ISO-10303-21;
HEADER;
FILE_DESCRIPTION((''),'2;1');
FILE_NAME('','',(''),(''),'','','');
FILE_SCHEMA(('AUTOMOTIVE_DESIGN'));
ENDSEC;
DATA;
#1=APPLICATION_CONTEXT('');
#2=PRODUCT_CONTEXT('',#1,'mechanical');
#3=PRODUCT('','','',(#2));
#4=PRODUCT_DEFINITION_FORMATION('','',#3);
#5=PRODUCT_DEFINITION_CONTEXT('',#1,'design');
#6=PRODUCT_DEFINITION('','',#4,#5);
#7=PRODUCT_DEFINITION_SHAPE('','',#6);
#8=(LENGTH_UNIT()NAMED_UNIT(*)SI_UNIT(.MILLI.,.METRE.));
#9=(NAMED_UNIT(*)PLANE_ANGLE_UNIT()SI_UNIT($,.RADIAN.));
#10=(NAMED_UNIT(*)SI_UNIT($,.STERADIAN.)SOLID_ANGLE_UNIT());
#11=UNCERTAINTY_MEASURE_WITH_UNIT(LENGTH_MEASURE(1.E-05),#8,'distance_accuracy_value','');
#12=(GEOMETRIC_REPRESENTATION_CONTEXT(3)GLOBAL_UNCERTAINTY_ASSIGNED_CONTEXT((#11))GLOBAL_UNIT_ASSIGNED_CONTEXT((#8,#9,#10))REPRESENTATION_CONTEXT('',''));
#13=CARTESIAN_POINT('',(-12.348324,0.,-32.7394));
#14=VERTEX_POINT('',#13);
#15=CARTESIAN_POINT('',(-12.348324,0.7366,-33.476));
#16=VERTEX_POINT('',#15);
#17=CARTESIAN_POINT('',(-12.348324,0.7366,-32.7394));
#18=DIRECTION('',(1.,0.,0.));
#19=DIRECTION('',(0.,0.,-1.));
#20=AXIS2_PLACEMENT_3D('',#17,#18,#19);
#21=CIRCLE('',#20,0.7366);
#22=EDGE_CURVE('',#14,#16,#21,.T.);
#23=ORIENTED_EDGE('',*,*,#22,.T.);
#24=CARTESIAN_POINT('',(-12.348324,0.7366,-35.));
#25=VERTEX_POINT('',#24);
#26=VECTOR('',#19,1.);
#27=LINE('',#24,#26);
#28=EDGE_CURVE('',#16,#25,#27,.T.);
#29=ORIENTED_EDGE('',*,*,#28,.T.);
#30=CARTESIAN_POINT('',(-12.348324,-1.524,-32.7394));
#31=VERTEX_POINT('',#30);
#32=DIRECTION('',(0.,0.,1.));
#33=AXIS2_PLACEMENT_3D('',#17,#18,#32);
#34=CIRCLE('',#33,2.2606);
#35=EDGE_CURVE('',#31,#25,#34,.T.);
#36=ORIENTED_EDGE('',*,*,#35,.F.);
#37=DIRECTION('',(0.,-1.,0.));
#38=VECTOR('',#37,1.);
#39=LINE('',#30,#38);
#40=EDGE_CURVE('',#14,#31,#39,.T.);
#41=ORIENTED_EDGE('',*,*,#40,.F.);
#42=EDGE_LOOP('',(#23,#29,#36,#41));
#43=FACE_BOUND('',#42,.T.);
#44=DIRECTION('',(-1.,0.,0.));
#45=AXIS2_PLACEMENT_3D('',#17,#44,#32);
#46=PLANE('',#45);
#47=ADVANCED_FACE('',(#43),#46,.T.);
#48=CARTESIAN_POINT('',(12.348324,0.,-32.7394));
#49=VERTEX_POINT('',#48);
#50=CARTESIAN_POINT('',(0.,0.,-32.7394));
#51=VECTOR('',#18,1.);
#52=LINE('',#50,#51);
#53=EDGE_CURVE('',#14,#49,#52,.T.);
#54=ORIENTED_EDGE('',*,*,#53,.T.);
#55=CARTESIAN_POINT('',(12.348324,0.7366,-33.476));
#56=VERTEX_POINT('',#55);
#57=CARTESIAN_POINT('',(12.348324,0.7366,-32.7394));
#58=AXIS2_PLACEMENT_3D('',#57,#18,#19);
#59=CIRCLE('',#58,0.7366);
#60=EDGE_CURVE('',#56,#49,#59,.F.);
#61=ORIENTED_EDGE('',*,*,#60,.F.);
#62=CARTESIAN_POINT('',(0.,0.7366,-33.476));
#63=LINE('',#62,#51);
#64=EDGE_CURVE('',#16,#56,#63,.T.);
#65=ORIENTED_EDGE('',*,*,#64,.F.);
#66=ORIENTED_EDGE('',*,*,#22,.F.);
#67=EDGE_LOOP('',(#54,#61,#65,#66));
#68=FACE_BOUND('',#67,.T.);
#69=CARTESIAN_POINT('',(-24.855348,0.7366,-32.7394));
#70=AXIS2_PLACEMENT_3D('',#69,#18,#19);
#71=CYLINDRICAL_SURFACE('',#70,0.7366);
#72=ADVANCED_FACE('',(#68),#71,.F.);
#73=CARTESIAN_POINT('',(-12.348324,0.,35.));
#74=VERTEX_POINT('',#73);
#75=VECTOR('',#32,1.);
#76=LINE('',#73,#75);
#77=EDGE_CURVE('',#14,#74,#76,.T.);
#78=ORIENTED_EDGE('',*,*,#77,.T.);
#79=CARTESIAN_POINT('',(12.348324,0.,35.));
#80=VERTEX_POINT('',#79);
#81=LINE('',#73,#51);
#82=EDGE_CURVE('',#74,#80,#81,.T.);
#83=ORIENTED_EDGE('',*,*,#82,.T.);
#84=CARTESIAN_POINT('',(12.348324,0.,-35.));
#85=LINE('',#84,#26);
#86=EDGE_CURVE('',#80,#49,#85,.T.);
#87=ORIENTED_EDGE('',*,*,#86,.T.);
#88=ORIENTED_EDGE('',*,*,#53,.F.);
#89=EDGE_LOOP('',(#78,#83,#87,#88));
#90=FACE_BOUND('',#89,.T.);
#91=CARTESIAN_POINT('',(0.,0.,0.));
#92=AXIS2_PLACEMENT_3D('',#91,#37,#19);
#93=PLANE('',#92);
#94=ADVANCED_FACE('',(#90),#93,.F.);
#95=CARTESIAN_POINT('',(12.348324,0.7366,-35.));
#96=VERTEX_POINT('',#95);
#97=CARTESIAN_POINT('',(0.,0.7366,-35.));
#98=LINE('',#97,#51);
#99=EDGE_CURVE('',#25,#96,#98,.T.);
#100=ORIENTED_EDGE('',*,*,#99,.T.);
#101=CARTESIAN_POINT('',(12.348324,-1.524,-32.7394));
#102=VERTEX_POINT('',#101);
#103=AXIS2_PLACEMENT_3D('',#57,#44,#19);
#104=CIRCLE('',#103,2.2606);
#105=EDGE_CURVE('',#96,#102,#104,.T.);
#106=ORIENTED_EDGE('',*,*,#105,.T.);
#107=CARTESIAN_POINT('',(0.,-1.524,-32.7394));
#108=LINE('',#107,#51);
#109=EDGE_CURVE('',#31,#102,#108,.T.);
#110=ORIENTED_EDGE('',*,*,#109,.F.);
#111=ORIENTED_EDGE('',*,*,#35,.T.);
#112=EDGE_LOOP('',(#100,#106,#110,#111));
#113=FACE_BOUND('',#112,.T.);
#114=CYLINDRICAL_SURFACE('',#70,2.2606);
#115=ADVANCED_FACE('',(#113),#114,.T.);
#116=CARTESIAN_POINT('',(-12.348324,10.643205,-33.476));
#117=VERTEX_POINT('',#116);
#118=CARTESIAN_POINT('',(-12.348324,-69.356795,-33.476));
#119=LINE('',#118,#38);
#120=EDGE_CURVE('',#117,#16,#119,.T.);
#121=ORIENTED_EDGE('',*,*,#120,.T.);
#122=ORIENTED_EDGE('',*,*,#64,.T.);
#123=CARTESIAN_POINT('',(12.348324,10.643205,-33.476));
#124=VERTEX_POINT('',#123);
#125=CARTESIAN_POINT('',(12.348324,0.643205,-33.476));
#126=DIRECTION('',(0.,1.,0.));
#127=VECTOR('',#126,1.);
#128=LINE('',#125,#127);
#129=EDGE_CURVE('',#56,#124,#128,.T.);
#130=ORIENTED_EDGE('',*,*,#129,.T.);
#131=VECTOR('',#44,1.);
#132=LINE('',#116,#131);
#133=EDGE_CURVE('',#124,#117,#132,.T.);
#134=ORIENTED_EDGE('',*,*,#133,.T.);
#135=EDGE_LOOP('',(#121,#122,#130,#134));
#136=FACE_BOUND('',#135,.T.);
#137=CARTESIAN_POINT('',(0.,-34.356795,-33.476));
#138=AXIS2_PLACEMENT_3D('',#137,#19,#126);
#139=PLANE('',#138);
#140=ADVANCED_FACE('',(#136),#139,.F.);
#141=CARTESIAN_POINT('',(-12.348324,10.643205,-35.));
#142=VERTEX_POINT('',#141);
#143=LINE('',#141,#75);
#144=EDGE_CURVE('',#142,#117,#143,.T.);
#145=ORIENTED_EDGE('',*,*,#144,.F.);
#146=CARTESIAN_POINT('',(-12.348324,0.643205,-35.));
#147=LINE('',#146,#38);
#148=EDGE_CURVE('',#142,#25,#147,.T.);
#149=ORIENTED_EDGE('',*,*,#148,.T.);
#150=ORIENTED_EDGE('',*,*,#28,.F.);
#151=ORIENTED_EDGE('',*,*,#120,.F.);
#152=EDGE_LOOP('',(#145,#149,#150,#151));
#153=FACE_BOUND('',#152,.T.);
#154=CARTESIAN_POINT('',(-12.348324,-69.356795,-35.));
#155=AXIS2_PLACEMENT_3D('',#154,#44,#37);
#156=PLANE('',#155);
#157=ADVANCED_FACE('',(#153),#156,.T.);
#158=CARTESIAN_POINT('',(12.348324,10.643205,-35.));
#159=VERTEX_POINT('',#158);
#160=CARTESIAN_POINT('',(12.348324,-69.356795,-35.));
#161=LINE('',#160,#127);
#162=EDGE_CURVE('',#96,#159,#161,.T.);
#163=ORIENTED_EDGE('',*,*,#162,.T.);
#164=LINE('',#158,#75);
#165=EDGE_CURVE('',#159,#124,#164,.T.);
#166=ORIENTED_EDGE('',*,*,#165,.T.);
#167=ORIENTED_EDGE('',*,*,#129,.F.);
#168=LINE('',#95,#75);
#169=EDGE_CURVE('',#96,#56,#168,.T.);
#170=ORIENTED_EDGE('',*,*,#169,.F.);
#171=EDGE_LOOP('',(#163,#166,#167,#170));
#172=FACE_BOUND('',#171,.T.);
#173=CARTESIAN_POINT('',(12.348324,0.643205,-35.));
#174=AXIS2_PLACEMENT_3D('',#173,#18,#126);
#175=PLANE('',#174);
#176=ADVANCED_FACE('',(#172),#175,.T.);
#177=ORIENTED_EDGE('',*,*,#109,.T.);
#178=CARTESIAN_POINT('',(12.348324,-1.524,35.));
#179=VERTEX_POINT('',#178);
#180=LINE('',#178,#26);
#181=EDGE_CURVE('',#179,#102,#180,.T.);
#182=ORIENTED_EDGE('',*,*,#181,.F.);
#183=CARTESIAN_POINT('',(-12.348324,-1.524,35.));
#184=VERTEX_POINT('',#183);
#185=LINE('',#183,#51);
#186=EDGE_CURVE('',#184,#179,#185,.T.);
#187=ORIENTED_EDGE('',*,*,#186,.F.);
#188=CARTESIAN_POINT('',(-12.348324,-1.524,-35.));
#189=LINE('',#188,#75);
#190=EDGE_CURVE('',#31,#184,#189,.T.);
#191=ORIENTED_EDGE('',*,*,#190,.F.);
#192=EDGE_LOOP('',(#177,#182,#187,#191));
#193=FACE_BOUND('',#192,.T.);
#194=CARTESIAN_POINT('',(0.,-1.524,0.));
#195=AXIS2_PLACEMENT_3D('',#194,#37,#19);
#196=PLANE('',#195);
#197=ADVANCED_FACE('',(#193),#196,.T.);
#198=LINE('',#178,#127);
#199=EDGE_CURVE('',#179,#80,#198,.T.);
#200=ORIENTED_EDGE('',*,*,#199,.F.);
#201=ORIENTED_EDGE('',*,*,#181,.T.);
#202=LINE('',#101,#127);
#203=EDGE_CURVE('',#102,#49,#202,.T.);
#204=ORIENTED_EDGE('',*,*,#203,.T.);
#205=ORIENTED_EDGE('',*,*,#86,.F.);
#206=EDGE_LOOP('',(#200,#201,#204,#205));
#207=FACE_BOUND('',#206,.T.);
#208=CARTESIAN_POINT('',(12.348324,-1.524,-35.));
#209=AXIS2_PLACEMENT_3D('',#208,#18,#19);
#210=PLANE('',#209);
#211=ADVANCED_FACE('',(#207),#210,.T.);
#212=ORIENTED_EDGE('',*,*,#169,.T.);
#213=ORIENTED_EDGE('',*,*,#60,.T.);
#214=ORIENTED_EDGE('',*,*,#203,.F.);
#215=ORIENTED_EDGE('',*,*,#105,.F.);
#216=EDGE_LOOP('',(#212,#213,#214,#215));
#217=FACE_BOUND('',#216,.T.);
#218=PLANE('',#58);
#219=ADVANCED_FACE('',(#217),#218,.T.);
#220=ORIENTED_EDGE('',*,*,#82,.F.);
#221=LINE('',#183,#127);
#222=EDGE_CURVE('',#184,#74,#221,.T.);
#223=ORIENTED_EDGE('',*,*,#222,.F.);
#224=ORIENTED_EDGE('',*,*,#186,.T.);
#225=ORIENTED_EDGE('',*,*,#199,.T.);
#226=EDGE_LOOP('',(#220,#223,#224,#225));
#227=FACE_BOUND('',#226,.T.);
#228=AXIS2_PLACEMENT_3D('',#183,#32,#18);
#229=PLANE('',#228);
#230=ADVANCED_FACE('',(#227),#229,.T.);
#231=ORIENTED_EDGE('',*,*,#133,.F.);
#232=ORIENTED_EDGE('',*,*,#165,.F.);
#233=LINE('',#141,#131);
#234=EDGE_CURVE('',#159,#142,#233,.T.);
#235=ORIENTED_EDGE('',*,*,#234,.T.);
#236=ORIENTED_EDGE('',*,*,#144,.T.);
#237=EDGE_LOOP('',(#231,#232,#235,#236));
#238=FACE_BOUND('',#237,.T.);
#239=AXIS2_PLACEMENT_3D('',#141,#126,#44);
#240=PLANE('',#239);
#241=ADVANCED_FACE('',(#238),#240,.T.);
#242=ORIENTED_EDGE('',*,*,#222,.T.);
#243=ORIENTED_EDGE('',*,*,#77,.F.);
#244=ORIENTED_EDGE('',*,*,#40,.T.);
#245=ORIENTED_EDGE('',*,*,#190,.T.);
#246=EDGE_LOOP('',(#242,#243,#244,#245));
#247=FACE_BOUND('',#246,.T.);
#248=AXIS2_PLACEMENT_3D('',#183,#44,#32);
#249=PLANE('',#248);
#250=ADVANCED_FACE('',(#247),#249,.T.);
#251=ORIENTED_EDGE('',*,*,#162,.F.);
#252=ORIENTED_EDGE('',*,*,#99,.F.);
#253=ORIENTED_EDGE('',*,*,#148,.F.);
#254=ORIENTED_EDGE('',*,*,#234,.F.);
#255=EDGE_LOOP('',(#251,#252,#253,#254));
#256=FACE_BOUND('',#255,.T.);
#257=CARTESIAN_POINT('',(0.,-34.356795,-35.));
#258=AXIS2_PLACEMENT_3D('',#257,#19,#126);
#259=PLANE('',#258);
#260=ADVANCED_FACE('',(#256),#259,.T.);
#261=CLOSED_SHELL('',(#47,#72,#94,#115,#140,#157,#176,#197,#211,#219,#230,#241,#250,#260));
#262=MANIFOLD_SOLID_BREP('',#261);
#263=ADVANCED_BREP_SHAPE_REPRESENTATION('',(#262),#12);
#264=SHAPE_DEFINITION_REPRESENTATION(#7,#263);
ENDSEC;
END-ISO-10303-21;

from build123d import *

# Parameters (mm, degrees)
BASE_FLANGE1_DEPTH     = 1.524
SKETCHED_START         = -12.348324115
SKETCHED_BEND6_DEPTH   = 24.69664823
SKETCHED_BEND6_2_DEPTH = 24.69664823


# Read off the part's stored shape, not the designer's step: Sketched Bend6
# Sheet-metal steps are written as plain solids
with BuildPart() as part:
    # Sketch2 → Base-Flange1 (new body)
    with BuildSketch(Plane(origin=(0, 0, 0), x_dir=(1, 0, 0), z_dir=(0, 1, 0))):
        Polygon((12.348324115, -35), (12.348324115, 35), (12.348324115, 45), (-12.348324115, 45), (-12.348324115, 35), (-12.348324115, -35), align=None)
    extrude(amount=-BASE_FLANGE1_DEPTH)

    # Sketched Bend6 outline → Sketched Bend6 (cut)
    with BuildSketch(Plane.YZ.offset(SKETCHED_START)):
        with BuildLine():
            Line((0, -45), (0, -34.876625492))
            ThreePointArc((0, -34.876625492), (-1.103980115, -34.051869886), (-1.524, -32.7394))
            Line((-1.524, -32.7394), (-1.524, -45))
            Line((-1.524, -45), (0, -45))
        make_face()
    extrude(amount=SKETCHED_BEND6_DEPTH, mode=Mode.SUBTRACT)

    # Sketched Bend6 2 outline → Sketched Bend6 2 (add)
    with BuildSketch(Plane.YZ.offset(SKETCHED_START)):
        with BuildLine():
            Line((10.643204625, -33.476), (0.7366, -33.476))
            ThreePointArc((0.7366, -33.476), (0.215745145, -33.260254855), (0, -32.7394))
            Line((0, -32.7394), (0, -34.876625492))
            ThreePointArc((0, -34.876625492), (0.363169675, -34.968943037), (0.7366, -35))
            Line((0.7366, -35), (10.643204625, -35))
            Line((10.643204625, -35), (10.643204625, -33.476))
        make_face()
    extrude(amount=SKETCHED_BEND6_2_DEPTH)


solid = part.part
